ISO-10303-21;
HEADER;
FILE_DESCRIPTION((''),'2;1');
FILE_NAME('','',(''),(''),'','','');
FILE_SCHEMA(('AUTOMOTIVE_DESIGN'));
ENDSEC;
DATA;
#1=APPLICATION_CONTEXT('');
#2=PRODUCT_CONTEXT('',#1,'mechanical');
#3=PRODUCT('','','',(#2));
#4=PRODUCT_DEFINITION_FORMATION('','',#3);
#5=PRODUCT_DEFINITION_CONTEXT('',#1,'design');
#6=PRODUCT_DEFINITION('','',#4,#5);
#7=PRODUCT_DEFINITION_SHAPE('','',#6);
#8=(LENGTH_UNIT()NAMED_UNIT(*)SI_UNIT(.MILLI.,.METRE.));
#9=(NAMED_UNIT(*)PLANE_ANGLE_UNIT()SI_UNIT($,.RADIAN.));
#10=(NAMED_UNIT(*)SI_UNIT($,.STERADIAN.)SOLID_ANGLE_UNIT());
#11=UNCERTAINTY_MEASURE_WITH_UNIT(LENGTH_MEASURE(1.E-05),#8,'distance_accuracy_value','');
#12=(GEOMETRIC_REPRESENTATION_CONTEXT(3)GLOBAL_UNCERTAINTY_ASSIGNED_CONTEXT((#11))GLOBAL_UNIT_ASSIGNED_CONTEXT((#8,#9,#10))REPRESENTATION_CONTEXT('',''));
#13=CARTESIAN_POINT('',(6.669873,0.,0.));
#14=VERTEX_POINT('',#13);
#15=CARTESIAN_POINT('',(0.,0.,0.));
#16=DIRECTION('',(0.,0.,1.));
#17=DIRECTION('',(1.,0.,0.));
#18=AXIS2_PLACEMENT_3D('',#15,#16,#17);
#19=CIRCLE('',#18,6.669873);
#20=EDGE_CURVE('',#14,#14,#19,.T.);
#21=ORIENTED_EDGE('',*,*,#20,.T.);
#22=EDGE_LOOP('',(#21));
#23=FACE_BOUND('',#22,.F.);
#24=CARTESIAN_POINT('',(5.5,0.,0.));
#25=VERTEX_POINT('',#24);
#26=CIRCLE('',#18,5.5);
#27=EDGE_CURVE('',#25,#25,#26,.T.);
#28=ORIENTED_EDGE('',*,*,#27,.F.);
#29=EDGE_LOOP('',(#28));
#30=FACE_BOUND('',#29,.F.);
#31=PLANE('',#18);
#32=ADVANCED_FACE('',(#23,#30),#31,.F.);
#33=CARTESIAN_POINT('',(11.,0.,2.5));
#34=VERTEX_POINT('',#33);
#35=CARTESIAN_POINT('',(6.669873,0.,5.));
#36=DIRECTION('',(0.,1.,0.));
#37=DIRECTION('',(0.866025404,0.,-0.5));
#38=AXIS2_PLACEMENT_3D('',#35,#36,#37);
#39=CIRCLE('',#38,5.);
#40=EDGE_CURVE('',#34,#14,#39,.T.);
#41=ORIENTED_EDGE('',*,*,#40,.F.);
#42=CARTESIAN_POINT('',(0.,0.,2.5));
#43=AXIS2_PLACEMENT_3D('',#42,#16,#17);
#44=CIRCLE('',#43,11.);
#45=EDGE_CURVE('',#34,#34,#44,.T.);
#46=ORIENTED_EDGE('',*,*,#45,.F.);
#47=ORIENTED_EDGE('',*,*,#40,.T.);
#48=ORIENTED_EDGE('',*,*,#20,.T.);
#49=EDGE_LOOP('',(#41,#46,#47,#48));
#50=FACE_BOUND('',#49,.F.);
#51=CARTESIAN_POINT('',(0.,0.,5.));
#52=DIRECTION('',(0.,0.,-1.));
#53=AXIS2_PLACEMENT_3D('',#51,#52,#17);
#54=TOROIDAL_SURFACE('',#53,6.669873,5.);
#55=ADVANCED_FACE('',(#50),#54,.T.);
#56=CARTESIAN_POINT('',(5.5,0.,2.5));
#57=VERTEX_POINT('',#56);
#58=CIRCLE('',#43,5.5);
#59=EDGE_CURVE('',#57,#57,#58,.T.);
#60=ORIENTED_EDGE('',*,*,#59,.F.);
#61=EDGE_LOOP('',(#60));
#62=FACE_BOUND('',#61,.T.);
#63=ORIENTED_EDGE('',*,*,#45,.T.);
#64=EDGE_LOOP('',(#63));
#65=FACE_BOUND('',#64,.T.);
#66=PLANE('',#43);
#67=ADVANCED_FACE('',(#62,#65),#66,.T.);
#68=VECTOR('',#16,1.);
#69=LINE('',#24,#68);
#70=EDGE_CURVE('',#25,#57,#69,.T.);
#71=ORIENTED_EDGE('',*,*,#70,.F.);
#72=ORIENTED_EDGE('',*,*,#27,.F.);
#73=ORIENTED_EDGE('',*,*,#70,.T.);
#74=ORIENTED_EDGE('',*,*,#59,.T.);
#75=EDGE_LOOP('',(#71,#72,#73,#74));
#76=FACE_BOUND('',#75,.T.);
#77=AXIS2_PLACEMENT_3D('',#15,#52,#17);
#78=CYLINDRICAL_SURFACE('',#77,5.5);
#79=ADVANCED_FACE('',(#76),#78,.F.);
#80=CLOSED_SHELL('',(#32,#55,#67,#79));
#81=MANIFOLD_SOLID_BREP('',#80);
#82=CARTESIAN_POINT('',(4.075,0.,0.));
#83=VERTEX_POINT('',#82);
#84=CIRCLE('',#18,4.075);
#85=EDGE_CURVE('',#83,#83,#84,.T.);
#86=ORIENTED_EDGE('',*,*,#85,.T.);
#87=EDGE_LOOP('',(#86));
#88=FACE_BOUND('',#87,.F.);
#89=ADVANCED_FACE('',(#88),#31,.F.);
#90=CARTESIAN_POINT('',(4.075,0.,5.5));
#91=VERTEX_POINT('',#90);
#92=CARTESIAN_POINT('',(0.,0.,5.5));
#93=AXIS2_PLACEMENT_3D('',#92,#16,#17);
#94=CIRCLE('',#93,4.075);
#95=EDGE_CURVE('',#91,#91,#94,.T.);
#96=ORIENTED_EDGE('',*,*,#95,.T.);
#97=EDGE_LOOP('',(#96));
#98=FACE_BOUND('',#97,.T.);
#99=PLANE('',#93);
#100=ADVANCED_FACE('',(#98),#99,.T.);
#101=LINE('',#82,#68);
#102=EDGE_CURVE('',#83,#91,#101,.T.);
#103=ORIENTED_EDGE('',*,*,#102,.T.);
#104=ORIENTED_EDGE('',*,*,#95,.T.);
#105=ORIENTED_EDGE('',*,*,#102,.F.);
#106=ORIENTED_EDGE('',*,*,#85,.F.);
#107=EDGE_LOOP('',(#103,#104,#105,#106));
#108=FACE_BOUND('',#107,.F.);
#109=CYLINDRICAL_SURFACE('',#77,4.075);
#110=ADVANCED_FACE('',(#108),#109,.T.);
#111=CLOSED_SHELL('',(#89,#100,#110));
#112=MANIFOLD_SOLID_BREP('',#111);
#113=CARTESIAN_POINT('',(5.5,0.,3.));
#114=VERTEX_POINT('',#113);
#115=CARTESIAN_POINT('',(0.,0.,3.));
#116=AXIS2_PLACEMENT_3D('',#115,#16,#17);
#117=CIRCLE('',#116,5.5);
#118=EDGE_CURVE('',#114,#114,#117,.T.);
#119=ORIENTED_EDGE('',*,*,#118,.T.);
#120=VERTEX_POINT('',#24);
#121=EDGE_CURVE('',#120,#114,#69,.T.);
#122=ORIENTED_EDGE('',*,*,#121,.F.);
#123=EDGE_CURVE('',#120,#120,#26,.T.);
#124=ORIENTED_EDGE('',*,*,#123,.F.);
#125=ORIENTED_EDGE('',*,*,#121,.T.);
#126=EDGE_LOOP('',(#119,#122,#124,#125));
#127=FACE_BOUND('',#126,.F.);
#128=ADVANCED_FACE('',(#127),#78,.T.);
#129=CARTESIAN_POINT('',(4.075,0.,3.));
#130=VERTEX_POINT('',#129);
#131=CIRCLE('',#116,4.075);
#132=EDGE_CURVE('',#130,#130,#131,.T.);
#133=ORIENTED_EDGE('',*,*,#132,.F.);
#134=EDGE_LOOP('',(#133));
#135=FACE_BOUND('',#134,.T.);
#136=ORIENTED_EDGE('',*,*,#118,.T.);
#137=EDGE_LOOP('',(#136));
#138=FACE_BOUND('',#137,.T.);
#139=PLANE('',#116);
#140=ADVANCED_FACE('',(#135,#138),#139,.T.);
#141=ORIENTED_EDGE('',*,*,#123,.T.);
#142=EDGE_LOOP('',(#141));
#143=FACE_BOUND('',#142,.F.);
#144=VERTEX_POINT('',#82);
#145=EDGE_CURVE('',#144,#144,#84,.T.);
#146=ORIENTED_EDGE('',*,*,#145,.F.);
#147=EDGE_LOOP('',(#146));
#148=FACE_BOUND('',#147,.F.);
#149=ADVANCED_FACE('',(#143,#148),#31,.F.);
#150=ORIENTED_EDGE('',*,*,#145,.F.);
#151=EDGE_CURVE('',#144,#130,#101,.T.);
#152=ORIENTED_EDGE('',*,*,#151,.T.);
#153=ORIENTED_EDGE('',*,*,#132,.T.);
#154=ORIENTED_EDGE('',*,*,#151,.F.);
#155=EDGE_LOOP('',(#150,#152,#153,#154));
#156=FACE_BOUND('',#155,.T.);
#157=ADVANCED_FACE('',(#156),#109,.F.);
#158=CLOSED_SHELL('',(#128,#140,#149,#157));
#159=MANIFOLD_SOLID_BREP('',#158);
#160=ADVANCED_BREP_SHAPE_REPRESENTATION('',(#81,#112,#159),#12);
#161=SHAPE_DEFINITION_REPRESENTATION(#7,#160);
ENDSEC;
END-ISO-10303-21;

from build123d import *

# Parameters (mm, degrees)
F0_R     = 4.075
F1_DEPTH = 5.5
F0_R_2   = 11
F0_R_3   = 5.5
F2_DEPTH = 2.5
F3_DEPTH = 3


# Not quite as in the source:
# - a fillet or chamfer that OpenCascade refuses, or shapes differently, is made with other operations: its cross-section is extruded or revolved along the edge and cut away or added


with BuildPart() as f1:
    # F0 (on Top) → F1 (new body)
    with BuildSketch(Plane.XY):
        Circle(F0_R)
    extrude(amount=F1_DEPTH)


with BuildPart() as f2:
    # F0 (on Top) → F2 (new body)
    with BuildSketch(Plane.XY):
        Circle(F0_R_2)
        Circle(F0_R_3, mode=Mode.SUBTRACT)
    extrude(amount=F2_DEPTH)

    # F4: fillet of radius 5 on 1 edges, made by hand

    # F4_s1 → F4_t2 (revolve, cut)
    with BuildSketch(Plane.XZ):
        with BuildLine():
            ThreePointArc((11, 2.5), (9.1698729811, 0.6698729811), (6.6698729811, 0))
            Line((6.6698729811, 0), (11, 0))
            Line((11, 0), (11, 2.5))
        make_face()
    revolve(axis=Axis((0, 0, 0), (0, 0, 1)), mode=Mode.SUBTRACT)


with BuildPart() as f3:
    # F0 (on Top) → F3 (new body)
    with BuildSketch(Plane.XY):
        Circle(F0_R_3)
        Circle(F0_R, mode=Mode.SUBTRACT)
    extrude(amount=F3_DEPTH)


solid = Compound([f1.part, f2.part, f3.part])
